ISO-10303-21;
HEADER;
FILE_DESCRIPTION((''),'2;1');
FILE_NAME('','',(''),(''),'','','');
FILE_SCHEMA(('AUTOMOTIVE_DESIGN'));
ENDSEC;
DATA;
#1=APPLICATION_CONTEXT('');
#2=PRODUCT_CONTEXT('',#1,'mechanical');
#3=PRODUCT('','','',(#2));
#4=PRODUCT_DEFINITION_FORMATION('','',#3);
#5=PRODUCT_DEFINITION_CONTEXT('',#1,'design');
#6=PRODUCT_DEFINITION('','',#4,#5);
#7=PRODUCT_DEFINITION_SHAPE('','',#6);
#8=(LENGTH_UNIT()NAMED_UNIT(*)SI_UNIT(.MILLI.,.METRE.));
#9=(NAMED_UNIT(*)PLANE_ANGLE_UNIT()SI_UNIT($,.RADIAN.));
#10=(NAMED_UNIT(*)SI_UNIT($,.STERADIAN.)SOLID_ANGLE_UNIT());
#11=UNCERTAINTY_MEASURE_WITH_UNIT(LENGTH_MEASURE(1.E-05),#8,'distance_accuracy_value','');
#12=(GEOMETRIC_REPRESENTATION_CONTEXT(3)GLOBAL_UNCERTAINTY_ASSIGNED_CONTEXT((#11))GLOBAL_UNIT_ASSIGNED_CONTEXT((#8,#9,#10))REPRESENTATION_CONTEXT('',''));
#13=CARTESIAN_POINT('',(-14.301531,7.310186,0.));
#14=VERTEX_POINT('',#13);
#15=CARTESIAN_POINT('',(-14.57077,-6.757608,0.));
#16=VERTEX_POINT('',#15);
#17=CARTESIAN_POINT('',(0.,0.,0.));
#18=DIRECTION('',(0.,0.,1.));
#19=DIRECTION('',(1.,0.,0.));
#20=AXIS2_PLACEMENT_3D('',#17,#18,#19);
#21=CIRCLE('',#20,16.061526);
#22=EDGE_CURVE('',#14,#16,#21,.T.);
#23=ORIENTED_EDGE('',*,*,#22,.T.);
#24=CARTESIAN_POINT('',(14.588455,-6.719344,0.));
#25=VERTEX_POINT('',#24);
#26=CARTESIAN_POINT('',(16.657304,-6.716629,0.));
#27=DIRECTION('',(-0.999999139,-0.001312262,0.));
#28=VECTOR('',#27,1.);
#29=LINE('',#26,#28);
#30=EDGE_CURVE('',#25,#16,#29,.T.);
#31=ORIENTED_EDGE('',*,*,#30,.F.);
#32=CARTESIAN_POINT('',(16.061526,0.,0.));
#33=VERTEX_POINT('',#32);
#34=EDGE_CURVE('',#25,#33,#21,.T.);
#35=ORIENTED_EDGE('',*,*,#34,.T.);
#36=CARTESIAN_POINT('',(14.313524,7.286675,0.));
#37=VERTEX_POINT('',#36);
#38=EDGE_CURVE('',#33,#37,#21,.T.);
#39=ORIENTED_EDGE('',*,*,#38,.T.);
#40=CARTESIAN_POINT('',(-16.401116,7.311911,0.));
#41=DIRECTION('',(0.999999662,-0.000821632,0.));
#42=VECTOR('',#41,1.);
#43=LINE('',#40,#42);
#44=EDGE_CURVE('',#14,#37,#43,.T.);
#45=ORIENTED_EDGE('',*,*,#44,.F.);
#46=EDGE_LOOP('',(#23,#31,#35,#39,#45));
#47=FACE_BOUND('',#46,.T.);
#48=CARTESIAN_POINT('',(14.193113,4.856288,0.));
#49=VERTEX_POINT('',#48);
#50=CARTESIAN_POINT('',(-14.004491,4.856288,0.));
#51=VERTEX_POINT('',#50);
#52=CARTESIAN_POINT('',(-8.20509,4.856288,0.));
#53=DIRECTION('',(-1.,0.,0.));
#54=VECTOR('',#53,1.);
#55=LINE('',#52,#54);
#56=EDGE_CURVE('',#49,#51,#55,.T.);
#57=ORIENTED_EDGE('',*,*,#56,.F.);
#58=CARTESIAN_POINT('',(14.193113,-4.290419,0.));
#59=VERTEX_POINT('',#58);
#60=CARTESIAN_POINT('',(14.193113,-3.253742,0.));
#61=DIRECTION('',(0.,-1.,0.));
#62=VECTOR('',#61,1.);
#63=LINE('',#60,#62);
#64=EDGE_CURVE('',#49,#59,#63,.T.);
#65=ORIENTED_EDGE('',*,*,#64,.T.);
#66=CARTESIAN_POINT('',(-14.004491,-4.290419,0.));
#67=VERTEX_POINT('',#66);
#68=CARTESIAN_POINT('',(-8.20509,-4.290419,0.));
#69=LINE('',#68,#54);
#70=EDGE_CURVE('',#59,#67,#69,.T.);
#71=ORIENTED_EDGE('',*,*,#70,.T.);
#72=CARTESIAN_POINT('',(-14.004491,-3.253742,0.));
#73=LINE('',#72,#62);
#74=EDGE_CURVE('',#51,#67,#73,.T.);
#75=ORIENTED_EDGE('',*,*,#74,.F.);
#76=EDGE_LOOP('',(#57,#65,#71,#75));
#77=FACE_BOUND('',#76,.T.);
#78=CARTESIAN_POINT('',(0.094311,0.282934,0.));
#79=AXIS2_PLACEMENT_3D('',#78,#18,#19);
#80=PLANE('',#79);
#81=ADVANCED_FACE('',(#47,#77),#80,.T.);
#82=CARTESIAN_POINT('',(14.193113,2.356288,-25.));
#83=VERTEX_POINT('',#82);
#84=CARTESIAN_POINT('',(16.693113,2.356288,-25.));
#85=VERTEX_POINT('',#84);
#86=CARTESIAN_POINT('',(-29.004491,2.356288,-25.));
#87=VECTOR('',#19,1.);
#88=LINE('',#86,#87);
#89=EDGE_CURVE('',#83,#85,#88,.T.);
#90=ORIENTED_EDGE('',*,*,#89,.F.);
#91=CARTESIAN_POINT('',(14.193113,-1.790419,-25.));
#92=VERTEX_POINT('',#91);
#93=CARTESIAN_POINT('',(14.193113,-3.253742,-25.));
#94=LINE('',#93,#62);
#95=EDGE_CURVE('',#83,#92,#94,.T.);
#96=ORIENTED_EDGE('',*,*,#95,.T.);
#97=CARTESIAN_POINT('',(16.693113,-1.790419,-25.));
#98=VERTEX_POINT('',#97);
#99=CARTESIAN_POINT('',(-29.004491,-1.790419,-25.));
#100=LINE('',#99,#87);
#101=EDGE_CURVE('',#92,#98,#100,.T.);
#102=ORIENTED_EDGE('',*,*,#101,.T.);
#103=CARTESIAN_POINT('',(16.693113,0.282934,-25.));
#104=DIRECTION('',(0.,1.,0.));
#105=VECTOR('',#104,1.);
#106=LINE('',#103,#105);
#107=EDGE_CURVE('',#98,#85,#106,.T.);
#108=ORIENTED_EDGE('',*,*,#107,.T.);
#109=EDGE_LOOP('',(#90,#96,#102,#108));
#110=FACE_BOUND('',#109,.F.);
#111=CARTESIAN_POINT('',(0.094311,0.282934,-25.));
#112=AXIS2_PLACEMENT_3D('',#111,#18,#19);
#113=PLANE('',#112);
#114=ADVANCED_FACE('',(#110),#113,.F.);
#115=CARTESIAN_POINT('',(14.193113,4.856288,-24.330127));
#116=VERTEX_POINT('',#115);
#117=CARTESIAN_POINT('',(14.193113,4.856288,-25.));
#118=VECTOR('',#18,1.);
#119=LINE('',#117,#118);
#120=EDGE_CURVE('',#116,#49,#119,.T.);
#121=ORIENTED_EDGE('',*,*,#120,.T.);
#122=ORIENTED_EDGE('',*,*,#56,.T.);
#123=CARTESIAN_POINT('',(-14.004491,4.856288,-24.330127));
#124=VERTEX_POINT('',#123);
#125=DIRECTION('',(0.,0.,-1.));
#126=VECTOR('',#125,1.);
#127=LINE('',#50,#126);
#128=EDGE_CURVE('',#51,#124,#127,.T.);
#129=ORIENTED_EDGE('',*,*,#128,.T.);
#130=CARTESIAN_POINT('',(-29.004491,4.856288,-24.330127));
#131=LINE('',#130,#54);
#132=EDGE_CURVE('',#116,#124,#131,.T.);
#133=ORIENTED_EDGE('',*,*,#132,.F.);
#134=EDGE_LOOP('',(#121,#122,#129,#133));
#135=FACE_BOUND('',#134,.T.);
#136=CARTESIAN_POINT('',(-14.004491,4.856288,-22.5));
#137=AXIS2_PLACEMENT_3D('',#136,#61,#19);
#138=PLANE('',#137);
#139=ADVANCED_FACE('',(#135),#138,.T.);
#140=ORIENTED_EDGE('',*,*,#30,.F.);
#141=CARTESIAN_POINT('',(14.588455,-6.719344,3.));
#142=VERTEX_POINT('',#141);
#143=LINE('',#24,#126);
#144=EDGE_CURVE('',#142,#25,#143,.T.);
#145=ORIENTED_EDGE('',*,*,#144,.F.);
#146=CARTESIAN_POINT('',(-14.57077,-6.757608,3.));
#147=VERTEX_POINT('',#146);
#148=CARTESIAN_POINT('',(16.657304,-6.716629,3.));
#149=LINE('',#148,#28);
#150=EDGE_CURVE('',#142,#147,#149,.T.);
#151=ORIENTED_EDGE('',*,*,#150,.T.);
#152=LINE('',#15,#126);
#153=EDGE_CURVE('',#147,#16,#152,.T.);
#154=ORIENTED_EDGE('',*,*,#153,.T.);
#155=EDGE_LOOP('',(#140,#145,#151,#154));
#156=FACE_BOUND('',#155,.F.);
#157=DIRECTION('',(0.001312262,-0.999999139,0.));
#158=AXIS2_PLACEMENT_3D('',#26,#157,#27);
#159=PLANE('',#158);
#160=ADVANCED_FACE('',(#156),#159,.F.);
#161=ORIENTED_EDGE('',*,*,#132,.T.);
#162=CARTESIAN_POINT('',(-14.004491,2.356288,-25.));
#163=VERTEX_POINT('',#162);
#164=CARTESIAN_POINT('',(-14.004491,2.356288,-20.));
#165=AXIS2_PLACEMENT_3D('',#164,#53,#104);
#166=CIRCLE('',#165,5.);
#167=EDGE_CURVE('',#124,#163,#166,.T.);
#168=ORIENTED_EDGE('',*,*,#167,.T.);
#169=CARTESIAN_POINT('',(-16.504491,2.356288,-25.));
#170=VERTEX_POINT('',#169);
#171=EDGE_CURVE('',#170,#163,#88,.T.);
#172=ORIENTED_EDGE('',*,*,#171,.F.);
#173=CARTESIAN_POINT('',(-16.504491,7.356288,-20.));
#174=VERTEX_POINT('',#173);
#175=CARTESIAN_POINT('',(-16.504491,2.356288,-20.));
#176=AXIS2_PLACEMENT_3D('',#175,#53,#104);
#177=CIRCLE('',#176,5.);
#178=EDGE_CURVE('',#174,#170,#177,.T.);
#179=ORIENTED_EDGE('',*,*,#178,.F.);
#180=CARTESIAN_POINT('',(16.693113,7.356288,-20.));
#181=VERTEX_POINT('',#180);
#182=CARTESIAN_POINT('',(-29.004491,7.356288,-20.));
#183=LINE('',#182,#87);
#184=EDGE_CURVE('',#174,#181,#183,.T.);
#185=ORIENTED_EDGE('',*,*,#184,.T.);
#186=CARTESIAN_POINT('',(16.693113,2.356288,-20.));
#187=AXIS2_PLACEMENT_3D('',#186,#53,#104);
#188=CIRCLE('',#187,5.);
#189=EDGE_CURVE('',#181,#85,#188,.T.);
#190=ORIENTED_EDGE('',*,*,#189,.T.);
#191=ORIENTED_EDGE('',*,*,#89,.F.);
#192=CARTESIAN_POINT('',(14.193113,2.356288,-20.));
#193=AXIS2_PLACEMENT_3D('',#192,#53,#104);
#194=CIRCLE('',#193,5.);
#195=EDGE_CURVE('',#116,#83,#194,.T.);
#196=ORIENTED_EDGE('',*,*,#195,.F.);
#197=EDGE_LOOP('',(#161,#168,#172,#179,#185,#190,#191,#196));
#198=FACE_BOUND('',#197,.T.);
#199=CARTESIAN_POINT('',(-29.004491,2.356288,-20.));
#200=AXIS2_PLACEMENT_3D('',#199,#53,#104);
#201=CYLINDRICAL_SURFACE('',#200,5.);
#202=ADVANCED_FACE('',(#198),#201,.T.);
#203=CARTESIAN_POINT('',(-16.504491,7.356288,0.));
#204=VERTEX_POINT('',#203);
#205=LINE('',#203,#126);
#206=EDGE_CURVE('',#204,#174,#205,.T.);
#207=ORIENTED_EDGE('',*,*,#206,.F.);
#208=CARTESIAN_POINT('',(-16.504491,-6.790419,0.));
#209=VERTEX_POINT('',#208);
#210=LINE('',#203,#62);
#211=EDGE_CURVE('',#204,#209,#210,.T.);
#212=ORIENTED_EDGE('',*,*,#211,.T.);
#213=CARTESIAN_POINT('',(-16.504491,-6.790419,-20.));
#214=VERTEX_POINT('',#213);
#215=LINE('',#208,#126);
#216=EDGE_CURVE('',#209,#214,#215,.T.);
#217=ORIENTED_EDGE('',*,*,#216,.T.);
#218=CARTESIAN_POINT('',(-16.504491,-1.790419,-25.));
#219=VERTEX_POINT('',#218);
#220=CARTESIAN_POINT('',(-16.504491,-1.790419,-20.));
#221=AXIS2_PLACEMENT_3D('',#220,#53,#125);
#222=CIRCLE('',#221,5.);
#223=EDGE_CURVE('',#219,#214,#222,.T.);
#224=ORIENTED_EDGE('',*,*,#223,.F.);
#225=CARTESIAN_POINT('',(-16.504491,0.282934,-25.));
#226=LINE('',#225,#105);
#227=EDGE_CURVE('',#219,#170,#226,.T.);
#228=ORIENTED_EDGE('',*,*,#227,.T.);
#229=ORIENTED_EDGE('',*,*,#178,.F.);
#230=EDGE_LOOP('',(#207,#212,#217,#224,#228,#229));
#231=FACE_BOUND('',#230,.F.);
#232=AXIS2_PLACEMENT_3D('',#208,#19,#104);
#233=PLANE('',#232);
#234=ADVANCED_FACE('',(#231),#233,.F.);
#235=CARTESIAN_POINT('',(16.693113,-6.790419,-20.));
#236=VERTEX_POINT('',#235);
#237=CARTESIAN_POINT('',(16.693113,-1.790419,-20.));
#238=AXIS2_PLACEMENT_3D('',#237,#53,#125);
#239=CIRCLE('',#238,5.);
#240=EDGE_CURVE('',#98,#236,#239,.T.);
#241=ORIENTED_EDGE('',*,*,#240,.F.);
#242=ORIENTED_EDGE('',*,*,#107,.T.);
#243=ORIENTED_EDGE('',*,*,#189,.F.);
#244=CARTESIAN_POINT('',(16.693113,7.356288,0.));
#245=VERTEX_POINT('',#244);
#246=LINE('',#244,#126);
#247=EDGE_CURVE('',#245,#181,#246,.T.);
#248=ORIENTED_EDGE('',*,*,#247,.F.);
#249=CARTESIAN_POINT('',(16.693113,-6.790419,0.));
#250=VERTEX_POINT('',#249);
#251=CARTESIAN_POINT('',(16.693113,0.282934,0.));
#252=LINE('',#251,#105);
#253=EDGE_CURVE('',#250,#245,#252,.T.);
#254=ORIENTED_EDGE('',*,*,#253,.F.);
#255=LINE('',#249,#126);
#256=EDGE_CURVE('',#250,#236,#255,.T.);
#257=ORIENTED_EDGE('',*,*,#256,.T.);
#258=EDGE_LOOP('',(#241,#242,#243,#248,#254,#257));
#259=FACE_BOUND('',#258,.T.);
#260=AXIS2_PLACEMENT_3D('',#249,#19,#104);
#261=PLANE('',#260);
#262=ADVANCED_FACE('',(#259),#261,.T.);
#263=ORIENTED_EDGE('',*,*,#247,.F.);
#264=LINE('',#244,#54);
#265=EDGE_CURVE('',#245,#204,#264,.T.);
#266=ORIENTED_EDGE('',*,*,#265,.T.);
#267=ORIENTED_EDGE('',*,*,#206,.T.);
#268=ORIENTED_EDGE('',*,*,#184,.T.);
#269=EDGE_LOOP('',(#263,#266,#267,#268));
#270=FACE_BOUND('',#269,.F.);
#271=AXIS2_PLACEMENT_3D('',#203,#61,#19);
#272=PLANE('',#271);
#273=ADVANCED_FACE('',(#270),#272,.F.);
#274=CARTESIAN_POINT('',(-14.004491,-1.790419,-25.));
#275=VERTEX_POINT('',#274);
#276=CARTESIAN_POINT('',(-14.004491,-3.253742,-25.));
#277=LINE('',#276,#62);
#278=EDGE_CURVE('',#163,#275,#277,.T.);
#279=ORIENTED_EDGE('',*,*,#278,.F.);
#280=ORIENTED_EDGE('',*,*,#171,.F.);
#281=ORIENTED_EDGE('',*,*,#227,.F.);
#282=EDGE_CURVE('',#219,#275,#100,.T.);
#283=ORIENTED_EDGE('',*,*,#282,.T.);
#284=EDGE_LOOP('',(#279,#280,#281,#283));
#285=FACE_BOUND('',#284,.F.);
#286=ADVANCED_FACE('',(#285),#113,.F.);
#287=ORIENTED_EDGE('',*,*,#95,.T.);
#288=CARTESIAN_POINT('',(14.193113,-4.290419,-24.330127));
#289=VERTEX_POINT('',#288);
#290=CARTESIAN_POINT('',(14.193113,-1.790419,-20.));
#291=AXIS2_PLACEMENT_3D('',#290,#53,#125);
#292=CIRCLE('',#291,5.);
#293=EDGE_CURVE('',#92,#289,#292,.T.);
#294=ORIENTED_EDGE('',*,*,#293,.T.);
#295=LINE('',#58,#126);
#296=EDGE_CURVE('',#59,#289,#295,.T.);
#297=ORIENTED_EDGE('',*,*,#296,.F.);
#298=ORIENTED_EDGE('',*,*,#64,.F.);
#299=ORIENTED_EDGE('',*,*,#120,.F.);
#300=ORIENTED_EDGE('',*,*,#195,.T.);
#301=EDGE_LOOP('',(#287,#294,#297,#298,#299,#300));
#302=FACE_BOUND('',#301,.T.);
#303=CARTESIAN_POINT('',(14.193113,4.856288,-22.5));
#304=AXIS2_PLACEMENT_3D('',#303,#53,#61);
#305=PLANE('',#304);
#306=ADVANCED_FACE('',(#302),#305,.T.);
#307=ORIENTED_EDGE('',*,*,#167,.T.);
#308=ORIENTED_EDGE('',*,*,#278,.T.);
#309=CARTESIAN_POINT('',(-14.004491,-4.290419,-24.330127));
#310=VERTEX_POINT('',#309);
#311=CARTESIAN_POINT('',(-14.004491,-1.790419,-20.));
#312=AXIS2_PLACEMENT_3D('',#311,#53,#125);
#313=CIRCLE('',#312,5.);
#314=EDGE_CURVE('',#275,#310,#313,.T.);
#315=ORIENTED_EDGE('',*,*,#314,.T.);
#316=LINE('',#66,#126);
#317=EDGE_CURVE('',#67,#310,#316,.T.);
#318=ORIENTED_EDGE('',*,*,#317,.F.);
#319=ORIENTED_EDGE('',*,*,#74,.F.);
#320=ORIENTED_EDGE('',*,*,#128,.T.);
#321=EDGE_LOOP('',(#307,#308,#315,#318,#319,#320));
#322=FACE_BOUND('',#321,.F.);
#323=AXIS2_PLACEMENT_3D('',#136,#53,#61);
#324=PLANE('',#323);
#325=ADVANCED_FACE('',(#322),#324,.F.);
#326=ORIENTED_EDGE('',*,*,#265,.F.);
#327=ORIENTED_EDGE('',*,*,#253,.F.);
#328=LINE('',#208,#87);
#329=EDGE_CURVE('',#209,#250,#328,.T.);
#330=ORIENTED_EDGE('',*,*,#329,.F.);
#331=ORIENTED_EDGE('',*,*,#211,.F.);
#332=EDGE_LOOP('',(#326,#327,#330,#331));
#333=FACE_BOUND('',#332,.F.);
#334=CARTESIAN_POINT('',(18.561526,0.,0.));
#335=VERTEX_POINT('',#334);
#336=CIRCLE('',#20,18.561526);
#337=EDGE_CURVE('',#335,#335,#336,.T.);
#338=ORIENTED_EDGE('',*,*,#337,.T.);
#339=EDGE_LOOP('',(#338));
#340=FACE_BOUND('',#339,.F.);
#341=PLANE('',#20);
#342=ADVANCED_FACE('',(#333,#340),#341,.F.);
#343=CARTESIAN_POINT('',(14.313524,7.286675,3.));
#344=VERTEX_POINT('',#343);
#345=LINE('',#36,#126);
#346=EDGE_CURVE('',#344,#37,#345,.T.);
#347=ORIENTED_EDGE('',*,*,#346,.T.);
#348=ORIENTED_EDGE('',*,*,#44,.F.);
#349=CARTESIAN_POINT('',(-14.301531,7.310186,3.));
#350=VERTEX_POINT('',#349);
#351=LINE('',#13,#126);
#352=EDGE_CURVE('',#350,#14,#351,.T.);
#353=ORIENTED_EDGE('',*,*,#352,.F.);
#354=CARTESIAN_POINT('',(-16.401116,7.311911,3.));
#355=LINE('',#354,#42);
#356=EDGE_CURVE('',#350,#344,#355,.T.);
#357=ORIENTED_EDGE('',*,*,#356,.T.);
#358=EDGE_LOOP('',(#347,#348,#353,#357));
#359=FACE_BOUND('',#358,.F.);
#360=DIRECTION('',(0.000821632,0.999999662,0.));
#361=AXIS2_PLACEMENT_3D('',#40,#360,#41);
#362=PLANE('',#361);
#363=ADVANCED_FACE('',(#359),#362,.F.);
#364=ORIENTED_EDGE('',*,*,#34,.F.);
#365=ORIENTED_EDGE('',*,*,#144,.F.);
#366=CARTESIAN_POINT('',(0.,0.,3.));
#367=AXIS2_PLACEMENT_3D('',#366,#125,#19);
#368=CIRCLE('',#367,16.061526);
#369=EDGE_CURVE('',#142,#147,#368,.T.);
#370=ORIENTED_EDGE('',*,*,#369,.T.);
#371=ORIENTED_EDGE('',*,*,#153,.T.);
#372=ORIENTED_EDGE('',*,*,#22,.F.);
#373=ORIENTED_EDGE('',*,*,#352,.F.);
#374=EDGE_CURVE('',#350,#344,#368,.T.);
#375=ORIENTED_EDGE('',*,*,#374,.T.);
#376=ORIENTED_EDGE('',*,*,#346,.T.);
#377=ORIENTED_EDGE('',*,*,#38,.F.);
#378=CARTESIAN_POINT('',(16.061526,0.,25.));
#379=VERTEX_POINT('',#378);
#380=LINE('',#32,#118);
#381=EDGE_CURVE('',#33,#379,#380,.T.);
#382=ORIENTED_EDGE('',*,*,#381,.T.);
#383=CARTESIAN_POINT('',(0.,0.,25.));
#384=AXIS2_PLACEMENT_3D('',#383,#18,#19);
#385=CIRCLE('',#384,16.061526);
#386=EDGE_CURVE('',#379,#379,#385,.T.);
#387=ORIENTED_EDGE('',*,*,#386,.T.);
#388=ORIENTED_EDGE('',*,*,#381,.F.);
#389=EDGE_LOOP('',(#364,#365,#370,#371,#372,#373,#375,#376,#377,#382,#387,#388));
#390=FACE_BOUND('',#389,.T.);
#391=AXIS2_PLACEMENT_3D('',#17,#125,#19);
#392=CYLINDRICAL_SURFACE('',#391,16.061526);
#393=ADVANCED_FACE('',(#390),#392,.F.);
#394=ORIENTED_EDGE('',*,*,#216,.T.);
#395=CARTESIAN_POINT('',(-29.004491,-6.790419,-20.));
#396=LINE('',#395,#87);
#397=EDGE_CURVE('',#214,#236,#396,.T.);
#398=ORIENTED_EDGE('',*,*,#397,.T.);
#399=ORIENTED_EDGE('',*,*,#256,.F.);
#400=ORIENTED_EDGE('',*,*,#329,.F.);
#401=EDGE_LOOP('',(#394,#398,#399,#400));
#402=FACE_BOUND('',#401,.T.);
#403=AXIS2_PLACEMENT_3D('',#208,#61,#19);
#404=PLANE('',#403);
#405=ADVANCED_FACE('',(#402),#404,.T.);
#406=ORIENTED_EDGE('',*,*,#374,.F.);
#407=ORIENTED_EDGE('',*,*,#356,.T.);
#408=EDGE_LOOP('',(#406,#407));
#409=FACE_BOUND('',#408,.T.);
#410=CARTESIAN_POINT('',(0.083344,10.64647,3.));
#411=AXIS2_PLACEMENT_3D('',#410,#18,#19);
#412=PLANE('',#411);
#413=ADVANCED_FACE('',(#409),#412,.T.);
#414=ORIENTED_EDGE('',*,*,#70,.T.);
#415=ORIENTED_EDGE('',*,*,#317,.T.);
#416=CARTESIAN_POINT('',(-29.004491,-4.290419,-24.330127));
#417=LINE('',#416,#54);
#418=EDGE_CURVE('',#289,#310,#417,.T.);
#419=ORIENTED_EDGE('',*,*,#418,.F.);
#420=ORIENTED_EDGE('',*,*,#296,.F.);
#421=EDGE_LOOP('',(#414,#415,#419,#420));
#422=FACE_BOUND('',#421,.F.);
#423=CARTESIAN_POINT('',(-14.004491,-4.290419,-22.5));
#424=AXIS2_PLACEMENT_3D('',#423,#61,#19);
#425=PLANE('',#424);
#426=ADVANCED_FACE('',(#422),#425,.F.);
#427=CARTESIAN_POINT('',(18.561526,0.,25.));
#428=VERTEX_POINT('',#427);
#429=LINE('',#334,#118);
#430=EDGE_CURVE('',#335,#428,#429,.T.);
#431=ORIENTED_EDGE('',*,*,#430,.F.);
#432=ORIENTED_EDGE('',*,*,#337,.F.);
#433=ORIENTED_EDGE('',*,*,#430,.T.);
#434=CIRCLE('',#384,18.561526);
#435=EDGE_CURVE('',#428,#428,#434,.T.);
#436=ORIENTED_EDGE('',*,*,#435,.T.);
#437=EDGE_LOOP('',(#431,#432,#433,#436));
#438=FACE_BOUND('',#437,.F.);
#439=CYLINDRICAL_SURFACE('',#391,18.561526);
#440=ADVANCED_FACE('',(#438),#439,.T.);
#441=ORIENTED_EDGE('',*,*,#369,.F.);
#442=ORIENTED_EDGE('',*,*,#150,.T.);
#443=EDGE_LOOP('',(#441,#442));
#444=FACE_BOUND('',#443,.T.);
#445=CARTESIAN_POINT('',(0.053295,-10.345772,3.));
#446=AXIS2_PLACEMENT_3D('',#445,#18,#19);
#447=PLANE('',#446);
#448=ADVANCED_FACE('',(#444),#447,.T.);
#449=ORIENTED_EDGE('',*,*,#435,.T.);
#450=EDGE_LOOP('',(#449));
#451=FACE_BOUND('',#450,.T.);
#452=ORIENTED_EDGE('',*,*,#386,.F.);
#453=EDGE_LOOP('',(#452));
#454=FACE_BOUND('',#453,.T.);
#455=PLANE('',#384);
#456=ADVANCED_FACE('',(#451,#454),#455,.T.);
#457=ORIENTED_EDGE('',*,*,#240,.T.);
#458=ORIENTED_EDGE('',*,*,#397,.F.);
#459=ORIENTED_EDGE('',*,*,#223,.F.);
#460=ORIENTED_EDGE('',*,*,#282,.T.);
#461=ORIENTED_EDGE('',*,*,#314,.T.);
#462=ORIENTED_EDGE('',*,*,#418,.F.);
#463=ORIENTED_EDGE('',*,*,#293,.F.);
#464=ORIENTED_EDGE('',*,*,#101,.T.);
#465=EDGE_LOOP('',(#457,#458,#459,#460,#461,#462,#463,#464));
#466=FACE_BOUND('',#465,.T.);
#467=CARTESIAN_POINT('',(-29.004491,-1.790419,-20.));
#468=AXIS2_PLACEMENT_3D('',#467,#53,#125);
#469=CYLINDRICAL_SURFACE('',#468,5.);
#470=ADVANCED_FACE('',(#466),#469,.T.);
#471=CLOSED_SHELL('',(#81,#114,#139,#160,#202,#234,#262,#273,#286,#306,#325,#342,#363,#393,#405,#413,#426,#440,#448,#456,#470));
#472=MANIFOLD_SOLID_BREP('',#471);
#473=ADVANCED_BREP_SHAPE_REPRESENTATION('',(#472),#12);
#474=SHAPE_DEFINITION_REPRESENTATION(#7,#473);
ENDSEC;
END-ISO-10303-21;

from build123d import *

# Parameters (mm, degrees)
F0_R         = 18.561525572
F1_DEPTH     = 25
F2_T         = -2.5
F3_W         = 33.1976041198
F3_H         = 14.1467070207
F4_DEPTH     = 25
F5_T         = -2.5
F7_DEPTH     = 3
F9_DEPTH     = 3
F10_T1_DEPTH = 58.1976041198
F11_T1_DEPTH = 58.1976041198


# Not quite as in the source:
# - a fillet or chamfer that OpenCascade refuses, or shapes differently, is made with other operations: its cross-section is extruded or revolved along the edge and cut away or added
# - a shell that OpenCascade refuses in one call is made with other operations: the cavity is built on its own and cut out


with BuildPart() as f1:
    # F0 (on Top) → F1 (new body)
    with BuildSketch(Plane.XY):
        Circle(F0_R)
    extrude(amount=F1_DEPTH)

    # F2
    f2_openings = [f1.faces().sort_by_distance(p)[0] for p in [
        (0, 0, 25),
        (0, 0, 0),
    ]]
    offset(amount=F2_T, openings=f2_openings)

    # F3 (on Top) → F4 (join)
    with BuildSketch(Plane.XY):
        with Locations((0.0943113118, 0.2829344012)):
            Rectangle(F3_W, F3_H)
    extrude(amount=-F4_DEPTH)

    # F5: a shell. OpenCascade refuses it in one call, so the cavity is built on its own and cut out:
    # the body offset inwards by the wall thickness, plus a prism from it out through each open face.
    f5_core = offset(f1.part, amount=F5_T, mode=Mode.PRIVATE)
    f5_exits = [f5_core.faces().sort_by_distance(p)[0] for p in [
        (0.094311, 0.282934, -22.5),
        (0.094311, 0.282934, -2.5),
    ]]
    add(f5_core, mode=Mode.SUBTRACT)
    extrude(f5_exits, amount=-F5_T, mode=Mode.SUBTRACT)

    # F6 (on Top) → F7 (join)
    with BuildSketch(Plane.XY):
        with BuildLine():
            Line((16.6573040187, -6.7166290246), (-16.5601819754, -6.760219112))
            ThreePointArc((-16.5601819754, -6.760219112), (0.0631717454, -17.8724120589), (16.6573040187, -6.7166290246))
        make_face()
    extrude(amount=F7_DEPTH)

    # F8 (on Top) → F9 (join)
    with BuildSketch(Plane.XY):
        with BuildLine():
            Line((-16.4011158049, 7.3119108565), (16.5623016655, 7.2848270647))
            ThreePointArc((16.5623016655, 7.2848270647), (0.0891507264, 17.7139786602), (-16.4011158049, 7.3119108565))
        make_face()
    extrude(amount=F9_DEPTH)

    # F10: fillet of radius 5 on 1 edges, made by hand

    # F10_s2 → F10_t1 (cut)
    with BuildSketch(Plane.YZ.offset(-29.004490748)):
        with BuildLine():
            ThreePointArc((-1.7904191092, -25), (-5.3259530151, -23.5355339059), (-6.7904191092, -20))
            Line((-6.7904191092, -20), (-6.7904191092, -25))
            Line((-6.7904191092, -25), (-1.7904191092, -25))
        make_face()
    extrude(amount=F10_T1_DEPTH, mode=Mode.SUBTRACT)

    # F11: fillet of radius 5 on 1 edges, made by hand

    # F11_s2 → F11_t1 (cut)
    with BuildSketch(Plane.YZ.offset(-29.004490748)):
        with BuildLine():
            ThreePointArc((7.3562879115, -20), (5.8918218175, -23.5355339059), (2.3562879115, -25))
            Line((2.3562879115, -25), (7.3562879115, -25))
            Line((7.3562879115, -25), (7.3562879115, -20))
        make_face()
    extrude(amount=F11_T1_DEPTH, mode=Mode.SUBTRACT)


solid = f1.part
